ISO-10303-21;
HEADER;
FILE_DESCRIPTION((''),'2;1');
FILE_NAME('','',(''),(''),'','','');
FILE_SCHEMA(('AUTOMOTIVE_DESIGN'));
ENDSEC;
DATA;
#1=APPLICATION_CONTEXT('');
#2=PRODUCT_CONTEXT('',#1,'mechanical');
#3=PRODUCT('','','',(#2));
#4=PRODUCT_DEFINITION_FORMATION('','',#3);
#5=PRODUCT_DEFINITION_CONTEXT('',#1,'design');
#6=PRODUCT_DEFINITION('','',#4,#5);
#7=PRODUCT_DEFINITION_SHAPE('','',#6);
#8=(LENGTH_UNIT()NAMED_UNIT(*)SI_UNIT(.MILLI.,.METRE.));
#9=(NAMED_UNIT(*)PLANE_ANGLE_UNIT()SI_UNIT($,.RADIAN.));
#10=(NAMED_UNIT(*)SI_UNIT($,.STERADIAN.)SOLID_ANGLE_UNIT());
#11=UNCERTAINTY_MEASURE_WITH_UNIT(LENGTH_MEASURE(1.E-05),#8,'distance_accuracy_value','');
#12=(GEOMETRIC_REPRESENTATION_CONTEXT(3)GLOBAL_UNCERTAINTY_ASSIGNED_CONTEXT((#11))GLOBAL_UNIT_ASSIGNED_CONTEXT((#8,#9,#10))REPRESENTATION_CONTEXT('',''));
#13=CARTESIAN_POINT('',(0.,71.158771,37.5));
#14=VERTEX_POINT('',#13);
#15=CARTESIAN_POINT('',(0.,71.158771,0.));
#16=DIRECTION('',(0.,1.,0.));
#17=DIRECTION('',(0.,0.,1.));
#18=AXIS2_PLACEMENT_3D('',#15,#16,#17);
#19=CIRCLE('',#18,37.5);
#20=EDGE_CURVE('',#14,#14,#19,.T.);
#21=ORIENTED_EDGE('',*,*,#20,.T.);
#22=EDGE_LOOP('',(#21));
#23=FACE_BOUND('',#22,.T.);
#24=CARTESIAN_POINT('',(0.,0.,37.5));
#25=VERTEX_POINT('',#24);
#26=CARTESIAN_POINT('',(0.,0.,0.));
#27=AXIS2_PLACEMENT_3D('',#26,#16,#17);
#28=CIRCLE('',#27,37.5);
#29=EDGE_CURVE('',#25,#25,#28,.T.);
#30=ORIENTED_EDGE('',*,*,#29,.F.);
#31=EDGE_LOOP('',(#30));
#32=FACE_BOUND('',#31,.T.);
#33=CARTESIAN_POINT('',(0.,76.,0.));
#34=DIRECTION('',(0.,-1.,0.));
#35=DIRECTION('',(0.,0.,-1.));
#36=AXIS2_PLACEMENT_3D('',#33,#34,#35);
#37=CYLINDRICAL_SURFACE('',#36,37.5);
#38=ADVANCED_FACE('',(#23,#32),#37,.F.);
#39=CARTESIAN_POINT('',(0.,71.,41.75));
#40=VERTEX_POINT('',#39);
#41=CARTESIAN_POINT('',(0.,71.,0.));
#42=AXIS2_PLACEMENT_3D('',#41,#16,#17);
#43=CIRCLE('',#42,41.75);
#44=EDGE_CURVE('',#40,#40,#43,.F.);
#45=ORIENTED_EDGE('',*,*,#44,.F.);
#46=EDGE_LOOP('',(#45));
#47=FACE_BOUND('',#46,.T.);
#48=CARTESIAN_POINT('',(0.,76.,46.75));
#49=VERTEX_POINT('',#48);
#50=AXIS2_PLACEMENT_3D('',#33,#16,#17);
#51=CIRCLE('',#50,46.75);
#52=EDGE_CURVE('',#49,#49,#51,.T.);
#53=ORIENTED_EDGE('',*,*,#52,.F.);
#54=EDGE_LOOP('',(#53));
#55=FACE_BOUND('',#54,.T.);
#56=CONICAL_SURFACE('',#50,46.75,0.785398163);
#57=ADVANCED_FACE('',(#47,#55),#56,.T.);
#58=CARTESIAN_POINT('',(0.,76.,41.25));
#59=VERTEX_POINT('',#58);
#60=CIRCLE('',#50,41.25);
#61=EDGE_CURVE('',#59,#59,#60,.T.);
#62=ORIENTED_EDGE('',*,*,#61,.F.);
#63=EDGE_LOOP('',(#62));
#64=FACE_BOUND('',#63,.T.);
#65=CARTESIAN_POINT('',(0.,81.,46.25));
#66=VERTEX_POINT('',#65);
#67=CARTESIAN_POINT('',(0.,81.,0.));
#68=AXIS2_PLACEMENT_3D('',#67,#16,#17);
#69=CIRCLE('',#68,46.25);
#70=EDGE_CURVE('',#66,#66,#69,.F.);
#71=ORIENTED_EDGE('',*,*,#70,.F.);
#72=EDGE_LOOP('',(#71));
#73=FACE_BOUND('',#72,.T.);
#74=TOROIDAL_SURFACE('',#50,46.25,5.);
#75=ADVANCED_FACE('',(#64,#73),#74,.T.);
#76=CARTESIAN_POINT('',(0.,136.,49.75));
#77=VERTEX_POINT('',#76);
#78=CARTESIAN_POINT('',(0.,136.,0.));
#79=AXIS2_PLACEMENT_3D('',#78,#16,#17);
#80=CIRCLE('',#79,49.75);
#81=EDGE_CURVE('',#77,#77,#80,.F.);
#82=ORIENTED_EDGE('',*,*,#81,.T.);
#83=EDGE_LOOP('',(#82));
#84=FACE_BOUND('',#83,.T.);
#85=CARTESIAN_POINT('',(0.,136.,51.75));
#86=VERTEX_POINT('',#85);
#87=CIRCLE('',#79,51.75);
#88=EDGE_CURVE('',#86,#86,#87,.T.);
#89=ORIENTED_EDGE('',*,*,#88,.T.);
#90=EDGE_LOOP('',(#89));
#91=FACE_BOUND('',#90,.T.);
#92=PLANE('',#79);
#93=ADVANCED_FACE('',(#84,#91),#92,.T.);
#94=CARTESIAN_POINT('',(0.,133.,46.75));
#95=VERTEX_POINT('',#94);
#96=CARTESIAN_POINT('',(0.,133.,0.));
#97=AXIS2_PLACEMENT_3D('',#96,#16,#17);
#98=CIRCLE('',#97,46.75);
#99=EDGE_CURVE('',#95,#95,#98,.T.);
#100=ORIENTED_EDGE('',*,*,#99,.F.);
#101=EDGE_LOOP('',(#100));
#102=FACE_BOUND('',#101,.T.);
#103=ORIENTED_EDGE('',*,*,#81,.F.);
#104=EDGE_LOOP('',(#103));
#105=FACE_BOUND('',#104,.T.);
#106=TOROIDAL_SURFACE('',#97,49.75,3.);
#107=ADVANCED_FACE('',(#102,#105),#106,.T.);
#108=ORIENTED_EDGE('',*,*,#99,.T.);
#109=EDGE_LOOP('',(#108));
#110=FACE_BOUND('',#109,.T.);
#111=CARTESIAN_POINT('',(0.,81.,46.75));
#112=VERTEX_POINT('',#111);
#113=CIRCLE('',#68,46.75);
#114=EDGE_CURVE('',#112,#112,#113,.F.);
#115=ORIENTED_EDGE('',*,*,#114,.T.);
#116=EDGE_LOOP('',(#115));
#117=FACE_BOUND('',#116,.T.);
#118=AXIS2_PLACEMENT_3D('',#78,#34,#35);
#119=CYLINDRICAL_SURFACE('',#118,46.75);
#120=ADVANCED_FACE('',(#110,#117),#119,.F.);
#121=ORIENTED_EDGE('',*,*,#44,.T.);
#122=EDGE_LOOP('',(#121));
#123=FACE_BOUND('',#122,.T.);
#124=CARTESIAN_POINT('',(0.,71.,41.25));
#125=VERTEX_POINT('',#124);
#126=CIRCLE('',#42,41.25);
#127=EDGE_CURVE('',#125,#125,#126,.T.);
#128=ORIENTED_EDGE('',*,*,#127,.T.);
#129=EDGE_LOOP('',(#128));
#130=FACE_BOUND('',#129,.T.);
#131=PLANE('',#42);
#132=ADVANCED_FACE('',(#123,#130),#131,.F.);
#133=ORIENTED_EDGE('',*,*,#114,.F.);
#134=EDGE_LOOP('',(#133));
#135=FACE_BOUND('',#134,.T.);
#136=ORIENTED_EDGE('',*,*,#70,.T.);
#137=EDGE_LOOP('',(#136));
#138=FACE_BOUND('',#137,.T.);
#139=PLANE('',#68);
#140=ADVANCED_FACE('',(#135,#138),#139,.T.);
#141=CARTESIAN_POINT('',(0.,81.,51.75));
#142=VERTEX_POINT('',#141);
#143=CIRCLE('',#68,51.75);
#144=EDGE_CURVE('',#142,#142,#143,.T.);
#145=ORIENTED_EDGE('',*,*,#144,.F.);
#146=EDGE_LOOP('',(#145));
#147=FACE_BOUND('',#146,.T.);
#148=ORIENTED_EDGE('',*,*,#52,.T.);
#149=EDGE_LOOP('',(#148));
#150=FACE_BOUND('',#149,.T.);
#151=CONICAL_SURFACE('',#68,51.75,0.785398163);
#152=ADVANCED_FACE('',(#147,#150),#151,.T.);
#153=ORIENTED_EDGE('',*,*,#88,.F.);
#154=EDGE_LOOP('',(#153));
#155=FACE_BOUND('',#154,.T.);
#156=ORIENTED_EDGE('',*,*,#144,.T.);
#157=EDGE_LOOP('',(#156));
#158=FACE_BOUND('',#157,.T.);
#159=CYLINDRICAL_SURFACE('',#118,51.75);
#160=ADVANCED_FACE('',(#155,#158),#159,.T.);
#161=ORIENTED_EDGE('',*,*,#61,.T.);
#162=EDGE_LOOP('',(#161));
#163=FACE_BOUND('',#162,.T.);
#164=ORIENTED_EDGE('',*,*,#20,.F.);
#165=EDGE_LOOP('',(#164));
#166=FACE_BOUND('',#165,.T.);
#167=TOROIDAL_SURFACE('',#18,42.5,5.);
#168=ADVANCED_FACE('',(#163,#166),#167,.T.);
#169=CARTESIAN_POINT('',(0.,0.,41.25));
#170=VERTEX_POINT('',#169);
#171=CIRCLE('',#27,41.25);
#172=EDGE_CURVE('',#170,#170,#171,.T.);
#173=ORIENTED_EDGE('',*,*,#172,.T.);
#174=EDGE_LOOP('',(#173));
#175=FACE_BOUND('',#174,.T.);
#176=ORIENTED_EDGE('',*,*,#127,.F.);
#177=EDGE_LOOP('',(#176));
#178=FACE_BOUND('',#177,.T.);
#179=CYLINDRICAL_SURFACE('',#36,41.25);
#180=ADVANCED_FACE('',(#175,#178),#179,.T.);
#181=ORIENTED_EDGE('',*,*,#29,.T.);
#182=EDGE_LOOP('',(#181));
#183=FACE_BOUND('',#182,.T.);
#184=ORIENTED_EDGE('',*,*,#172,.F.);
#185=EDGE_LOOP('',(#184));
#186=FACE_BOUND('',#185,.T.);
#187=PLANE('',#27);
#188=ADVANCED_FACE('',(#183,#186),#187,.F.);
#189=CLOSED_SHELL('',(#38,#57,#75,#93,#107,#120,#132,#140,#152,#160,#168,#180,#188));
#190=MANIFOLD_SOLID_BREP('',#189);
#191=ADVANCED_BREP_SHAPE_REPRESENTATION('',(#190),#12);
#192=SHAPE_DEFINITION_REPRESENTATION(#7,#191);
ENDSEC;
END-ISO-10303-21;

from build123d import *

# Parameters (mm, degrees)
SKETCH1_R                = 41.25
SKETCH1_R_2              = 37.5
BOSS_EXTRUDE2_DEPTH      = 76
SKETCH2_R                = 51.75
SKETCH2_R_2              = 46.75
BOSS_EXTRUDE3_DEPTH      = 60
BOSS_EXTRUDE5_DEPTH      = 5
BOSS_EXTRUDE5_DEPTH_BACK = 5
SKETCH3_R                = 46.75
SKETCH3_R_2              = 41.25
CHAMFER1_SIZE            = 5
CHAMFER2_SIZE            = 5
FILLET1_R                = 5
FILLET2_R                = 5
FILLET3_R                = 3


# Some blends are built 0.0001 mm under size
with BuildPart() as part:
    # Sketch1 → Boss-Extrude2 (new body)
    with BuildSketch(Plane(origin=(0, 0, 0), x_dir=(1, 0, 0), z_dir=(0, 1, 0))):
        with Locations(Location((0, 0, 0), (0, 0, 270))):
            Circle(SKETCH1_R)
        with Locations(Location((0, 0, 0), (0, 0, 270))):
            Circle(SKETCH1_R_2, mode=Mode.SUBTRACT)
    extrude(amount=BOSS_EXTRUDE2_DEPTH)



with BuildPart() as body_2:
    # Sketch2 → Boss-Extrude3 (new body)
    with BuildSketch(Plane(origin=(0, 76, 0), x_dir=(1, 0, 0), z_dir=(0, 1, 0))):
        with Locations(Location((0, 0, 0), (0, 0, 270))):
            Circle(SKETCH2_R)
        with Locations(Location((0, 0, 0), (0, 0, 270))):
            Circle(SKETCH2_R_2, mode=Mode.SUBTRACT)
    extrude(amount=BOSS_EXTRUDE3_DEPTH)


with BuildPart() as part_1:
    add(part.part)

    add(body_2.part)  # Boss-Extrude5 merges body 2
    # Sketch3 → Boss-Extrude5 (add, two sides: drawn at the far end of the back side and taken through both)
    with BuildSketch(Plane(origin=(0, 76, 0), x_dir=(1, 0, 0), z_dir=(0, 1, 0)).offset(-BOSS_EXTRUDE5_DEPTH_BACK)):
        with Locations(Location((0, 0, 0), (0, 0, 270))):
            Circle(SKETCH3_R)
        with Locations(Location((0, 0, 0), (0, 0, 270))):
            Circle(SKETCH3_R_2, mode=Mode.SUBTRACT)
    extrude(amount=BOSS_EXTRUDE5_DEPTH + BOSS_EXTRUDE5_DEPTH_BACK)

    # Chamfer1
    chamfer1_edges = [part_1.edges().sort_by_distance(p)[0] for p in [
        (0, 71, -46.75),
    ]]
    chamfer(chamfer1_edges, length=CHAMFER1_SIZE - 0.0001)  # a hair under: the kernel refuses the full size

    # Chamfer2
    chamfer2_edges = [part_1.edges().sort_by_distance(p)[0] for p in [
        (0, 76, -51.75),
    ]]
    chamfer(chamfer2_edges, length=CHAMFER2_SIZE - 0.0001)  # a hair under: the kernel refuses the full size

    # Fillet1
    fillet1_edges = [part_1.edges().sort_by_distance(p)[0] for p in [
        (0, 81, -41.25),
    ]]
    fillet(fillet1_edges, radius=FILLET1_R - 0.0001)  # a hair under: the kernel refuses the full size

    # Fillet2
    # the kernel refuses this fillet: 5 mm, written as the material it takes off along each edge
    with BuildSketch(Plane(origin=(0, 76, 0), x_dir=(0, 0, 1), z_dir=(-1, 0, 0))) as fillet2_piece_1:
        with BuildLine():
            CenterArc((42.5, -4.841229183), FILLET2_R, 104.477512186, 75.522487814)
            Line((37.5, -4.841229183), (37.4, -4.841229183))
            Line((37.4, -4.841229183), (37.4, 0))
            Line((37.4, 0), (37.5, 0.1))
            ThreePointArc((37.5, 0.1), (39.375, 0.1), (41.225, 0.096824584))
            Line((41.225, 0.096824584), (41.25, 0))
        make_face()
    revolve(axis=Axis((0, 76, 0), (0, 1, 0)), mode=Mode.SUBTRACT)

    # Fillet3
    fillet3_edges = [part_1.edges().sort_by_distance(p)[0] for p in [
        (0, 136, -46.75),
    ]]
    fillet(fillet3_edges, radius=FILLET3_R)


solid = part_1.part
